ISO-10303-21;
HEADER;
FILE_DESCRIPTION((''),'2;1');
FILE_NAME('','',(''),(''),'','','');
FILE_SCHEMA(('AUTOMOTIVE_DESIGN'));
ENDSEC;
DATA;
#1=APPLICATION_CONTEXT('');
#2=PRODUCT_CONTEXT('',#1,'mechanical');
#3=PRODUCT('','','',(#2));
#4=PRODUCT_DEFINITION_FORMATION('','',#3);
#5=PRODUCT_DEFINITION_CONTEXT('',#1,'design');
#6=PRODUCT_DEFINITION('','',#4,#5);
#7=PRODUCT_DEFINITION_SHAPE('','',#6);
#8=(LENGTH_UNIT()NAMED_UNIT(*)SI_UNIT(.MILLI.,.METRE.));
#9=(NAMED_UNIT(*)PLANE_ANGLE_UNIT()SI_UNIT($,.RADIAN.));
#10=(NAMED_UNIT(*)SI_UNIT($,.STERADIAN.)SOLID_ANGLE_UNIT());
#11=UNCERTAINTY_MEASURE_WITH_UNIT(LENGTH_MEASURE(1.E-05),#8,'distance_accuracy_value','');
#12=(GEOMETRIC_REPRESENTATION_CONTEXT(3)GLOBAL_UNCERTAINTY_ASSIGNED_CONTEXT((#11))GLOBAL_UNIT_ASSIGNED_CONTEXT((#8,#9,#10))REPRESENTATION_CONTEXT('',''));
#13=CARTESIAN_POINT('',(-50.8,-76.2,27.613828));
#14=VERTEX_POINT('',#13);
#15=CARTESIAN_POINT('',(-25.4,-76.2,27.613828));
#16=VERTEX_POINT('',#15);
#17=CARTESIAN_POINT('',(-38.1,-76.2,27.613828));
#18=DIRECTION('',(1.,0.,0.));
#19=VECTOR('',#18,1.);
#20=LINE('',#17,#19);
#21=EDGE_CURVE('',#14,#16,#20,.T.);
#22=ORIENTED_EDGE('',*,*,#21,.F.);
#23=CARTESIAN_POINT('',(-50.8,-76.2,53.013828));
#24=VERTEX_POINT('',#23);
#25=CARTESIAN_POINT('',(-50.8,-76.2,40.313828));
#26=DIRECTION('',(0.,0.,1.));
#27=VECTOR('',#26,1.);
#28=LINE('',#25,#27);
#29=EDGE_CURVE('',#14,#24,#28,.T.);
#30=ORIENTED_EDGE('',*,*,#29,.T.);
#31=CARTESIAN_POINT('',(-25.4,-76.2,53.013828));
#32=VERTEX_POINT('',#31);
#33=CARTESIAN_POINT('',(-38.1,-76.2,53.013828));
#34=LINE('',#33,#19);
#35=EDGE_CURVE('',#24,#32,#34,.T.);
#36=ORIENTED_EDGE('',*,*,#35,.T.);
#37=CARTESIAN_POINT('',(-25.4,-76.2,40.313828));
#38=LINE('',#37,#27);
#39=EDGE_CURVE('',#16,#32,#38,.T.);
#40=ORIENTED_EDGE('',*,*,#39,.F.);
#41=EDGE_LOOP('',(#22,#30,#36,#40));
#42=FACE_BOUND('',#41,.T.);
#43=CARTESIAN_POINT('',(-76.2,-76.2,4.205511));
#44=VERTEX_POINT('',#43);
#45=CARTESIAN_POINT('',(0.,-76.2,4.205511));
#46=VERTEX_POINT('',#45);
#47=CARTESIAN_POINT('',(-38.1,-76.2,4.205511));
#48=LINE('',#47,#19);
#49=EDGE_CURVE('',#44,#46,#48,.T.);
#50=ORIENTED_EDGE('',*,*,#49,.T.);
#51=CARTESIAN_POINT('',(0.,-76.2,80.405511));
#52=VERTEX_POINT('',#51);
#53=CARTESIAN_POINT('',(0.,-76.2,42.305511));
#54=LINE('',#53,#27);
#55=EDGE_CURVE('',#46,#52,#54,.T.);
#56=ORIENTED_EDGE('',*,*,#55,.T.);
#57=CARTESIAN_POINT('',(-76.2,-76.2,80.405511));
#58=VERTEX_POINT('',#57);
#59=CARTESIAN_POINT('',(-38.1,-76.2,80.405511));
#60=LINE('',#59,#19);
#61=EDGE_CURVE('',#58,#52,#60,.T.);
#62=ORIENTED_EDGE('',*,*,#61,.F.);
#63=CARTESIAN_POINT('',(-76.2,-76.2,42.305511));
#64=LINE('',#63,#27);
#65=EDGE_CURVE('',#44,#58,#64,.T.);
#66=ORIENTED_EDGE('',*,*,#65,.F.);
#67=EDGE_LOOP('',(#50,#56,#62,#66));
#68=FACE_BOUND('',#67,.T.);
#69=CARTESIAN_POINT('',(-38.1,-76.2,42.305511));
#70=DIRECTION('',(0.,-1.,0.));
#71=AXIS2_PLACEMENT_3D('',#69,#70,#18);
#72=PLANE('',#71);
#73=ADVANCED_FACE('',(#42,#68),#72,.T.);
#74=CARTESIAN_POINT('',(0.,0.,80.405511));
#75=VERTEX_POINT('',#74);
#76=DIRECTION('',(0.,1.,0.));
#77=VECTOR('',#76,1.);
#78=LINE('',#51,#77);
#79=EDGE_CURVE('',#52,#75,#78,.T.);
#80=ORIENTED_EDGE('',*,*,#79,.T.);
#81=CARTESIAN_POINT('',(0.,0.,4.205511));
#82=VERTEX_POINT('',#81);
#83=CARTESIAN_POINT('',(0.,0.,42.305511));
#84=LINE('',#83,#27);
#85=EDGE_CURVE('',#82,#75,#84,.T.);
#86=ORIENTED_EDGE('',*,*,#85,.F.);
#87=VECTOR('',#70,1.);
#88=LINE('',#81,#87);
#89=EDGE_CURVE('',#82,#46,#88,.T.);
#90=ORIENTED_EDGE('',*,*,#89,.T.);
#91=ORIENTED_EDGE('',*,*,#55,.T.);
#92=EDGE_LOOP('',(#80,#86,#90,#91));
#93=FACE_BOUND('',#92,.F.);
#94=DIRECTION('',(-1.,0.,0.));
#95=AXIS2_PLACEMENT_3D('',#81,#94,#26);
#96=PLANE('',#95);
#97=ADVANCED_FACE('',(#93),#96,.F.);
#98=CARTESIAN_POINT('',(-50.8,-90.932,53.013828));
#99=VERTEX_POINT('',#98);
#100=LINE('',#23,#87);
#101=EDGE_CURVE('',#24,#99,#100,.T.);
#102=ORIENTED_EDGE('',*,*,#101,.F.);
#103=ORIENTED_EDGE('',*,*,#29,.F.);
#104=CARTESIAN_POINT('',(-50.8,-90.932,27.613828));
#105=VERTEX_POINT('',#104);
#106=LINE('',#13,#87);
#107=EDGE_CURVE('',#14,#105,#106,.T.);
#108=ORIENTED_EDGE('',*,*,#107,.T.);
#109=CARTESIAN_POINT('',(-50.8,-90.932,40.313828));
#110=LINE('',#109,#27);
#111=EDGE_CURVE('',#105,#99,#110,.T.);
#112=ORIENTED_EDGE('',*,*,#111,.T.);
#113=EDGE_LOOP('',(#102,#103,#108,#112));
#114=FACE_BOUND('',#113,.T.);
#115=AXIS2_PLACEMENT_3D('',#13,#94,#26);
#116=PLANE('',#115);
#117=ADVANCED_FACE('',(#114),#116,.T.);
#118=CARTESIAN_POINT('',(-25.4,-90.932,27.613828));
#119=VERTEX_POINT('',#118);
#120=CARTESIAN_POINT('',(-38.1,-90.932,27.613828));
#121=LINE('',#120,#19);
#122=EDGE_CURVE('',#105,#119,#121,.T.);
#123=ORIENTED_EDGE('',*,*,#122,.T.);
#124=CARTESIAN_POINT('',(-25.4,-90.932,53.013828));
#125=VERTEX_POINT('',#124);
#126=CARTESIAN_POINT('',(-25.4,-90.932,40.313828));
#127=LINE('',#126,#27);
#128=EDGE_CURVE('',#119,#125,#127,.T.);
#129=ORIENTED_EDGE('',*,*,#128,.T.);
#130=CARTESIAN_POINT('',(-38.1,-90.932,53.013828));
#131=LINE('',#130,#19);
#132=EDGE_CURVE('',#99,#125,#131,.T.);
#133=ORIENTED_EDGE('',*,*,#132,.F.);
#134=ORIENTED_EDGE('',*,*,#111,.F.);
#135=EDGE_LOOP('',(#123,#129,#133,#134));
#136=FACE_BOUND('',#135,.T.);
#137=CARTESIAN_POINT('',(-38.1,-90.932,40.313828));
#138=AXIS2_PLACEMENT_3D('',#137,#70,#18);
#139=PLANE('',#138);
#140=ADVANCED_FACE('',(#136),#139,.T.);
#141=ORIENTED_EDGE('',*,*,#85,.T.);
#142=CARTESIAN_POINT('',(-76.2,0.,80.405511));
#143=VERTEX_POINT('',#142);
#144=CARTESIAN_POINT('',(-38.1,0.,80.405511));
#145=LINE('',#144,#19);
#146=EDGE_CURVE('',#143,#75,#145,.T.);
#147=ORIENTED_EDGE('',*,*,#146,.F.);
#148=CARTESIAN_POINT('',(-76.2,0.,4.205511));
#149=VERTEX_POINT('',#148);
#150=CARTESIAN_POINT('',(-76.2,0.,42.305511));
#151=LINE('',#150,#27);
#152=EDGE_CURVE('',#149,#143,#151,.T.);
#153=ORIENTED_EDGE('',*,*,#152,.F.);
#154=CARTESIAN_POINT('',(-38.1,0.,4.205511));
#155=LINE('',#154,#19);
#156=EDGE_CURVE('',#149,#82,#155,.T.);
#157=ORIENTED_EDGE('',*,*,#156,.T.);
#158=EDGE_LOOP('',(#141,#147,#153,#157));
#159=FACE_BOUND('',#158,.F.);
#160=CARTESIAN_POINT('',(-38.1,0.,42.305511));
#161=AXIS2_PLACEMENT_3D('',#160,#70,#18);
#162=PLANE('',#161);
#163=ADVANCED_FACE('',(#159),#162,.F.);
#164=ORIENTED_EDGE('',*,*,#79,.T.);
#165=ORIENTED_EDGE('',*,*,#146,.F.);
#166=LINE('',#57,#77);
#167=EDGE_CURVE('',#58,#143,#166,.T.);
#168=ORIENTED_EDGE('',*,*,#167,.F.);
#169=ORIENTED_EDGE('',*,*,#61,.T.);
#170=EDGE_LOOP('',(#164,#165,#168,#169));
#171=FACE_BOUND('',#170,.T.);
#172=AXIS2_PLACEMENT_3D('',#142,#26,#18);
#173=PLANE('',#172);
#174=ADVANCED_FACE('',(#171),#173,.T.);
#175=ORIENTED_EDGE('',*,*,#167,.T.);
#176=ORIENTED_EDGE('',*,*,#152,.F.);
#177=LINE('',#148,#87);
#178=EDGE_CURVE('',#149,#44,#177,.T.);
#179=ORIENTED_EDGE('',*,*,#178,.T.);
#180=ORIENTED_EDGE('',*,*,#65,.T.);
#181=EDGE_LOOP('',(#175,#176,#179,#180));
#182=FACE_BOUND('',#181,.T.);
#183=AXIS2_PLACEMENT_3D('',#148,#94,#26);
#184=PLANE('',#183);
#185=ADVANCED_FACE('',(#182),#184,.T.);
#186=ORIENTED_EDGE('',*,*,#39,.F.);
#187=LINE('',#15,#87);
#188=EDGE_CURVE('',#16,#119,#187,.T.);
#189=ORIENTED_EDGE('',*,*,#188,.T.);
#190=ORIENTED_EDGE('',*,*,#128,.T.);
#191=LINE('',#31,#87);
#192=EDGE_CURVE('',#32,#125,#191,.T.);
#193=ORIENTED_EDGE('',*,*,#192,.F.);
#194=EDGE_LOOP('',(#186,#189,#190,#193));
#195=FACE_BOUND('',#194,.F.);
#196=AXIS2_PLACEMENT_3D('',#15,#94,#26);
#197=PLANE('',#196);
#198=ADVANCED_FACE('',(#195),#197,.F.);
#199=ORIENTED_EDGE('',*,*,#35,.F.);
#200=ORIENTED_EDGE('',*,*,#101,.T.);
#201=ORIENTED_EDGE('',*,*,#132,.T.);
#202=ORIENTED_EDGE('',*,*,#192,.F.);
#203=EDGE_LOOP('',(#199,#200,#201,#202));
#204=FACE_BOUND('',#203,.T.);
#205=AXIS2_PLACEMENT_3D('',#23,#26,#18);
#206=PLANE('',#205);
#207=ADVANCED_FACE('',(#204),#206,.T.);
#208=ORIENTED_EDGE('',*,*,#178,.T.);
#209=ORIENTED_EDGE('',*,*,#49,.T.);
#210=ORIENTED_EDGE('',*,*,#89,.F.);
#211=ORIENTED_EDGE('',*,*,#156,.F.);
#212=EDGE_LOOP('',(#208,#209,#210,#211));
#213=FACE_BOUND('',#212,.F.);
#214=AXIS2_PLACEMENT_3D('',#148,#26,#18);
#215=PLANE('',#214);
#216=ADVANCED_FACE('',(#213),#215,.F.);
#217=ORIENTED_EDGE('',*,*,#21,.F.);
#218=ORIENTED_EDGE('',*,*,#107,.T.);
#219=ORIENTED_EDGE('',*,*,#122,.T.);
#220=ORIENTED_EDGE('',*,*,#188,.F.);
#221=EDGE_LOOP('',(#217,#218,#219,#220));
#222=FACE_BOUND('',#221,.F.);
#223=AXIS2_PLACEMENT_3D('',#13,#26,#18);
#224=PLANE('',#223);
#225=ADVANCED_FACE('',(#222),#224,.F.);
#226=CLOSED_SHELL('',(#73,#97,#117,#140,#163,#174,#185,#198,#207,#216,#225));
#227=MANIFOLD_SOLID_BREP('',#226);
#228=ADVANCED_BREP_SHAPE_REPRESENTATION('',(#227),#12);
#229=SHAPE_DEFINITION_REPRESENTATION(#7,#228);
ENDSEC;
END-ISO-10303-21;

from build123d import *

# Parameters (mm, degrees)
F0_W     = 76.2
F0_H     = 76.2
F1_DEPTH = 25.4
F2_DEPTH = 76.2
F3_W     = 25.4
F3_H     = 25.4
F4_DEPTH = 14.732


# Not quite as in the source:
# - the program builds the solid bodies; features that only make, move or delete a surface that nothing else refers to are left out


with BuildPart() as f1:
    # F0 (on Front) → F1 (new body)
    with BuildSketch(Plane.XZ):
        with Locations((-38.1, 42.3055109791)):
            Rectangle(F0_W, F0_H)
    extrude(amount=F1_DEPTH)

    # F0 (on Front) → F2 (join)
    with BuildSketch(Plane.XZ):
        with Locations((-38.1, 42.3055109791)):
            Rectangle(F0_W, F0_H)
    extrude(amount=F2_DEPTH)

    # F3 (on face) → F4 (join)
    with BuildSketch(Plane.XZ.offset(76.2)):
        with Locations((-38.1, 40.3138278052)):
            Rectangle(F3_W, F3_H)
    extrude(amount=F4_DEPTH)


solid = f1.part
